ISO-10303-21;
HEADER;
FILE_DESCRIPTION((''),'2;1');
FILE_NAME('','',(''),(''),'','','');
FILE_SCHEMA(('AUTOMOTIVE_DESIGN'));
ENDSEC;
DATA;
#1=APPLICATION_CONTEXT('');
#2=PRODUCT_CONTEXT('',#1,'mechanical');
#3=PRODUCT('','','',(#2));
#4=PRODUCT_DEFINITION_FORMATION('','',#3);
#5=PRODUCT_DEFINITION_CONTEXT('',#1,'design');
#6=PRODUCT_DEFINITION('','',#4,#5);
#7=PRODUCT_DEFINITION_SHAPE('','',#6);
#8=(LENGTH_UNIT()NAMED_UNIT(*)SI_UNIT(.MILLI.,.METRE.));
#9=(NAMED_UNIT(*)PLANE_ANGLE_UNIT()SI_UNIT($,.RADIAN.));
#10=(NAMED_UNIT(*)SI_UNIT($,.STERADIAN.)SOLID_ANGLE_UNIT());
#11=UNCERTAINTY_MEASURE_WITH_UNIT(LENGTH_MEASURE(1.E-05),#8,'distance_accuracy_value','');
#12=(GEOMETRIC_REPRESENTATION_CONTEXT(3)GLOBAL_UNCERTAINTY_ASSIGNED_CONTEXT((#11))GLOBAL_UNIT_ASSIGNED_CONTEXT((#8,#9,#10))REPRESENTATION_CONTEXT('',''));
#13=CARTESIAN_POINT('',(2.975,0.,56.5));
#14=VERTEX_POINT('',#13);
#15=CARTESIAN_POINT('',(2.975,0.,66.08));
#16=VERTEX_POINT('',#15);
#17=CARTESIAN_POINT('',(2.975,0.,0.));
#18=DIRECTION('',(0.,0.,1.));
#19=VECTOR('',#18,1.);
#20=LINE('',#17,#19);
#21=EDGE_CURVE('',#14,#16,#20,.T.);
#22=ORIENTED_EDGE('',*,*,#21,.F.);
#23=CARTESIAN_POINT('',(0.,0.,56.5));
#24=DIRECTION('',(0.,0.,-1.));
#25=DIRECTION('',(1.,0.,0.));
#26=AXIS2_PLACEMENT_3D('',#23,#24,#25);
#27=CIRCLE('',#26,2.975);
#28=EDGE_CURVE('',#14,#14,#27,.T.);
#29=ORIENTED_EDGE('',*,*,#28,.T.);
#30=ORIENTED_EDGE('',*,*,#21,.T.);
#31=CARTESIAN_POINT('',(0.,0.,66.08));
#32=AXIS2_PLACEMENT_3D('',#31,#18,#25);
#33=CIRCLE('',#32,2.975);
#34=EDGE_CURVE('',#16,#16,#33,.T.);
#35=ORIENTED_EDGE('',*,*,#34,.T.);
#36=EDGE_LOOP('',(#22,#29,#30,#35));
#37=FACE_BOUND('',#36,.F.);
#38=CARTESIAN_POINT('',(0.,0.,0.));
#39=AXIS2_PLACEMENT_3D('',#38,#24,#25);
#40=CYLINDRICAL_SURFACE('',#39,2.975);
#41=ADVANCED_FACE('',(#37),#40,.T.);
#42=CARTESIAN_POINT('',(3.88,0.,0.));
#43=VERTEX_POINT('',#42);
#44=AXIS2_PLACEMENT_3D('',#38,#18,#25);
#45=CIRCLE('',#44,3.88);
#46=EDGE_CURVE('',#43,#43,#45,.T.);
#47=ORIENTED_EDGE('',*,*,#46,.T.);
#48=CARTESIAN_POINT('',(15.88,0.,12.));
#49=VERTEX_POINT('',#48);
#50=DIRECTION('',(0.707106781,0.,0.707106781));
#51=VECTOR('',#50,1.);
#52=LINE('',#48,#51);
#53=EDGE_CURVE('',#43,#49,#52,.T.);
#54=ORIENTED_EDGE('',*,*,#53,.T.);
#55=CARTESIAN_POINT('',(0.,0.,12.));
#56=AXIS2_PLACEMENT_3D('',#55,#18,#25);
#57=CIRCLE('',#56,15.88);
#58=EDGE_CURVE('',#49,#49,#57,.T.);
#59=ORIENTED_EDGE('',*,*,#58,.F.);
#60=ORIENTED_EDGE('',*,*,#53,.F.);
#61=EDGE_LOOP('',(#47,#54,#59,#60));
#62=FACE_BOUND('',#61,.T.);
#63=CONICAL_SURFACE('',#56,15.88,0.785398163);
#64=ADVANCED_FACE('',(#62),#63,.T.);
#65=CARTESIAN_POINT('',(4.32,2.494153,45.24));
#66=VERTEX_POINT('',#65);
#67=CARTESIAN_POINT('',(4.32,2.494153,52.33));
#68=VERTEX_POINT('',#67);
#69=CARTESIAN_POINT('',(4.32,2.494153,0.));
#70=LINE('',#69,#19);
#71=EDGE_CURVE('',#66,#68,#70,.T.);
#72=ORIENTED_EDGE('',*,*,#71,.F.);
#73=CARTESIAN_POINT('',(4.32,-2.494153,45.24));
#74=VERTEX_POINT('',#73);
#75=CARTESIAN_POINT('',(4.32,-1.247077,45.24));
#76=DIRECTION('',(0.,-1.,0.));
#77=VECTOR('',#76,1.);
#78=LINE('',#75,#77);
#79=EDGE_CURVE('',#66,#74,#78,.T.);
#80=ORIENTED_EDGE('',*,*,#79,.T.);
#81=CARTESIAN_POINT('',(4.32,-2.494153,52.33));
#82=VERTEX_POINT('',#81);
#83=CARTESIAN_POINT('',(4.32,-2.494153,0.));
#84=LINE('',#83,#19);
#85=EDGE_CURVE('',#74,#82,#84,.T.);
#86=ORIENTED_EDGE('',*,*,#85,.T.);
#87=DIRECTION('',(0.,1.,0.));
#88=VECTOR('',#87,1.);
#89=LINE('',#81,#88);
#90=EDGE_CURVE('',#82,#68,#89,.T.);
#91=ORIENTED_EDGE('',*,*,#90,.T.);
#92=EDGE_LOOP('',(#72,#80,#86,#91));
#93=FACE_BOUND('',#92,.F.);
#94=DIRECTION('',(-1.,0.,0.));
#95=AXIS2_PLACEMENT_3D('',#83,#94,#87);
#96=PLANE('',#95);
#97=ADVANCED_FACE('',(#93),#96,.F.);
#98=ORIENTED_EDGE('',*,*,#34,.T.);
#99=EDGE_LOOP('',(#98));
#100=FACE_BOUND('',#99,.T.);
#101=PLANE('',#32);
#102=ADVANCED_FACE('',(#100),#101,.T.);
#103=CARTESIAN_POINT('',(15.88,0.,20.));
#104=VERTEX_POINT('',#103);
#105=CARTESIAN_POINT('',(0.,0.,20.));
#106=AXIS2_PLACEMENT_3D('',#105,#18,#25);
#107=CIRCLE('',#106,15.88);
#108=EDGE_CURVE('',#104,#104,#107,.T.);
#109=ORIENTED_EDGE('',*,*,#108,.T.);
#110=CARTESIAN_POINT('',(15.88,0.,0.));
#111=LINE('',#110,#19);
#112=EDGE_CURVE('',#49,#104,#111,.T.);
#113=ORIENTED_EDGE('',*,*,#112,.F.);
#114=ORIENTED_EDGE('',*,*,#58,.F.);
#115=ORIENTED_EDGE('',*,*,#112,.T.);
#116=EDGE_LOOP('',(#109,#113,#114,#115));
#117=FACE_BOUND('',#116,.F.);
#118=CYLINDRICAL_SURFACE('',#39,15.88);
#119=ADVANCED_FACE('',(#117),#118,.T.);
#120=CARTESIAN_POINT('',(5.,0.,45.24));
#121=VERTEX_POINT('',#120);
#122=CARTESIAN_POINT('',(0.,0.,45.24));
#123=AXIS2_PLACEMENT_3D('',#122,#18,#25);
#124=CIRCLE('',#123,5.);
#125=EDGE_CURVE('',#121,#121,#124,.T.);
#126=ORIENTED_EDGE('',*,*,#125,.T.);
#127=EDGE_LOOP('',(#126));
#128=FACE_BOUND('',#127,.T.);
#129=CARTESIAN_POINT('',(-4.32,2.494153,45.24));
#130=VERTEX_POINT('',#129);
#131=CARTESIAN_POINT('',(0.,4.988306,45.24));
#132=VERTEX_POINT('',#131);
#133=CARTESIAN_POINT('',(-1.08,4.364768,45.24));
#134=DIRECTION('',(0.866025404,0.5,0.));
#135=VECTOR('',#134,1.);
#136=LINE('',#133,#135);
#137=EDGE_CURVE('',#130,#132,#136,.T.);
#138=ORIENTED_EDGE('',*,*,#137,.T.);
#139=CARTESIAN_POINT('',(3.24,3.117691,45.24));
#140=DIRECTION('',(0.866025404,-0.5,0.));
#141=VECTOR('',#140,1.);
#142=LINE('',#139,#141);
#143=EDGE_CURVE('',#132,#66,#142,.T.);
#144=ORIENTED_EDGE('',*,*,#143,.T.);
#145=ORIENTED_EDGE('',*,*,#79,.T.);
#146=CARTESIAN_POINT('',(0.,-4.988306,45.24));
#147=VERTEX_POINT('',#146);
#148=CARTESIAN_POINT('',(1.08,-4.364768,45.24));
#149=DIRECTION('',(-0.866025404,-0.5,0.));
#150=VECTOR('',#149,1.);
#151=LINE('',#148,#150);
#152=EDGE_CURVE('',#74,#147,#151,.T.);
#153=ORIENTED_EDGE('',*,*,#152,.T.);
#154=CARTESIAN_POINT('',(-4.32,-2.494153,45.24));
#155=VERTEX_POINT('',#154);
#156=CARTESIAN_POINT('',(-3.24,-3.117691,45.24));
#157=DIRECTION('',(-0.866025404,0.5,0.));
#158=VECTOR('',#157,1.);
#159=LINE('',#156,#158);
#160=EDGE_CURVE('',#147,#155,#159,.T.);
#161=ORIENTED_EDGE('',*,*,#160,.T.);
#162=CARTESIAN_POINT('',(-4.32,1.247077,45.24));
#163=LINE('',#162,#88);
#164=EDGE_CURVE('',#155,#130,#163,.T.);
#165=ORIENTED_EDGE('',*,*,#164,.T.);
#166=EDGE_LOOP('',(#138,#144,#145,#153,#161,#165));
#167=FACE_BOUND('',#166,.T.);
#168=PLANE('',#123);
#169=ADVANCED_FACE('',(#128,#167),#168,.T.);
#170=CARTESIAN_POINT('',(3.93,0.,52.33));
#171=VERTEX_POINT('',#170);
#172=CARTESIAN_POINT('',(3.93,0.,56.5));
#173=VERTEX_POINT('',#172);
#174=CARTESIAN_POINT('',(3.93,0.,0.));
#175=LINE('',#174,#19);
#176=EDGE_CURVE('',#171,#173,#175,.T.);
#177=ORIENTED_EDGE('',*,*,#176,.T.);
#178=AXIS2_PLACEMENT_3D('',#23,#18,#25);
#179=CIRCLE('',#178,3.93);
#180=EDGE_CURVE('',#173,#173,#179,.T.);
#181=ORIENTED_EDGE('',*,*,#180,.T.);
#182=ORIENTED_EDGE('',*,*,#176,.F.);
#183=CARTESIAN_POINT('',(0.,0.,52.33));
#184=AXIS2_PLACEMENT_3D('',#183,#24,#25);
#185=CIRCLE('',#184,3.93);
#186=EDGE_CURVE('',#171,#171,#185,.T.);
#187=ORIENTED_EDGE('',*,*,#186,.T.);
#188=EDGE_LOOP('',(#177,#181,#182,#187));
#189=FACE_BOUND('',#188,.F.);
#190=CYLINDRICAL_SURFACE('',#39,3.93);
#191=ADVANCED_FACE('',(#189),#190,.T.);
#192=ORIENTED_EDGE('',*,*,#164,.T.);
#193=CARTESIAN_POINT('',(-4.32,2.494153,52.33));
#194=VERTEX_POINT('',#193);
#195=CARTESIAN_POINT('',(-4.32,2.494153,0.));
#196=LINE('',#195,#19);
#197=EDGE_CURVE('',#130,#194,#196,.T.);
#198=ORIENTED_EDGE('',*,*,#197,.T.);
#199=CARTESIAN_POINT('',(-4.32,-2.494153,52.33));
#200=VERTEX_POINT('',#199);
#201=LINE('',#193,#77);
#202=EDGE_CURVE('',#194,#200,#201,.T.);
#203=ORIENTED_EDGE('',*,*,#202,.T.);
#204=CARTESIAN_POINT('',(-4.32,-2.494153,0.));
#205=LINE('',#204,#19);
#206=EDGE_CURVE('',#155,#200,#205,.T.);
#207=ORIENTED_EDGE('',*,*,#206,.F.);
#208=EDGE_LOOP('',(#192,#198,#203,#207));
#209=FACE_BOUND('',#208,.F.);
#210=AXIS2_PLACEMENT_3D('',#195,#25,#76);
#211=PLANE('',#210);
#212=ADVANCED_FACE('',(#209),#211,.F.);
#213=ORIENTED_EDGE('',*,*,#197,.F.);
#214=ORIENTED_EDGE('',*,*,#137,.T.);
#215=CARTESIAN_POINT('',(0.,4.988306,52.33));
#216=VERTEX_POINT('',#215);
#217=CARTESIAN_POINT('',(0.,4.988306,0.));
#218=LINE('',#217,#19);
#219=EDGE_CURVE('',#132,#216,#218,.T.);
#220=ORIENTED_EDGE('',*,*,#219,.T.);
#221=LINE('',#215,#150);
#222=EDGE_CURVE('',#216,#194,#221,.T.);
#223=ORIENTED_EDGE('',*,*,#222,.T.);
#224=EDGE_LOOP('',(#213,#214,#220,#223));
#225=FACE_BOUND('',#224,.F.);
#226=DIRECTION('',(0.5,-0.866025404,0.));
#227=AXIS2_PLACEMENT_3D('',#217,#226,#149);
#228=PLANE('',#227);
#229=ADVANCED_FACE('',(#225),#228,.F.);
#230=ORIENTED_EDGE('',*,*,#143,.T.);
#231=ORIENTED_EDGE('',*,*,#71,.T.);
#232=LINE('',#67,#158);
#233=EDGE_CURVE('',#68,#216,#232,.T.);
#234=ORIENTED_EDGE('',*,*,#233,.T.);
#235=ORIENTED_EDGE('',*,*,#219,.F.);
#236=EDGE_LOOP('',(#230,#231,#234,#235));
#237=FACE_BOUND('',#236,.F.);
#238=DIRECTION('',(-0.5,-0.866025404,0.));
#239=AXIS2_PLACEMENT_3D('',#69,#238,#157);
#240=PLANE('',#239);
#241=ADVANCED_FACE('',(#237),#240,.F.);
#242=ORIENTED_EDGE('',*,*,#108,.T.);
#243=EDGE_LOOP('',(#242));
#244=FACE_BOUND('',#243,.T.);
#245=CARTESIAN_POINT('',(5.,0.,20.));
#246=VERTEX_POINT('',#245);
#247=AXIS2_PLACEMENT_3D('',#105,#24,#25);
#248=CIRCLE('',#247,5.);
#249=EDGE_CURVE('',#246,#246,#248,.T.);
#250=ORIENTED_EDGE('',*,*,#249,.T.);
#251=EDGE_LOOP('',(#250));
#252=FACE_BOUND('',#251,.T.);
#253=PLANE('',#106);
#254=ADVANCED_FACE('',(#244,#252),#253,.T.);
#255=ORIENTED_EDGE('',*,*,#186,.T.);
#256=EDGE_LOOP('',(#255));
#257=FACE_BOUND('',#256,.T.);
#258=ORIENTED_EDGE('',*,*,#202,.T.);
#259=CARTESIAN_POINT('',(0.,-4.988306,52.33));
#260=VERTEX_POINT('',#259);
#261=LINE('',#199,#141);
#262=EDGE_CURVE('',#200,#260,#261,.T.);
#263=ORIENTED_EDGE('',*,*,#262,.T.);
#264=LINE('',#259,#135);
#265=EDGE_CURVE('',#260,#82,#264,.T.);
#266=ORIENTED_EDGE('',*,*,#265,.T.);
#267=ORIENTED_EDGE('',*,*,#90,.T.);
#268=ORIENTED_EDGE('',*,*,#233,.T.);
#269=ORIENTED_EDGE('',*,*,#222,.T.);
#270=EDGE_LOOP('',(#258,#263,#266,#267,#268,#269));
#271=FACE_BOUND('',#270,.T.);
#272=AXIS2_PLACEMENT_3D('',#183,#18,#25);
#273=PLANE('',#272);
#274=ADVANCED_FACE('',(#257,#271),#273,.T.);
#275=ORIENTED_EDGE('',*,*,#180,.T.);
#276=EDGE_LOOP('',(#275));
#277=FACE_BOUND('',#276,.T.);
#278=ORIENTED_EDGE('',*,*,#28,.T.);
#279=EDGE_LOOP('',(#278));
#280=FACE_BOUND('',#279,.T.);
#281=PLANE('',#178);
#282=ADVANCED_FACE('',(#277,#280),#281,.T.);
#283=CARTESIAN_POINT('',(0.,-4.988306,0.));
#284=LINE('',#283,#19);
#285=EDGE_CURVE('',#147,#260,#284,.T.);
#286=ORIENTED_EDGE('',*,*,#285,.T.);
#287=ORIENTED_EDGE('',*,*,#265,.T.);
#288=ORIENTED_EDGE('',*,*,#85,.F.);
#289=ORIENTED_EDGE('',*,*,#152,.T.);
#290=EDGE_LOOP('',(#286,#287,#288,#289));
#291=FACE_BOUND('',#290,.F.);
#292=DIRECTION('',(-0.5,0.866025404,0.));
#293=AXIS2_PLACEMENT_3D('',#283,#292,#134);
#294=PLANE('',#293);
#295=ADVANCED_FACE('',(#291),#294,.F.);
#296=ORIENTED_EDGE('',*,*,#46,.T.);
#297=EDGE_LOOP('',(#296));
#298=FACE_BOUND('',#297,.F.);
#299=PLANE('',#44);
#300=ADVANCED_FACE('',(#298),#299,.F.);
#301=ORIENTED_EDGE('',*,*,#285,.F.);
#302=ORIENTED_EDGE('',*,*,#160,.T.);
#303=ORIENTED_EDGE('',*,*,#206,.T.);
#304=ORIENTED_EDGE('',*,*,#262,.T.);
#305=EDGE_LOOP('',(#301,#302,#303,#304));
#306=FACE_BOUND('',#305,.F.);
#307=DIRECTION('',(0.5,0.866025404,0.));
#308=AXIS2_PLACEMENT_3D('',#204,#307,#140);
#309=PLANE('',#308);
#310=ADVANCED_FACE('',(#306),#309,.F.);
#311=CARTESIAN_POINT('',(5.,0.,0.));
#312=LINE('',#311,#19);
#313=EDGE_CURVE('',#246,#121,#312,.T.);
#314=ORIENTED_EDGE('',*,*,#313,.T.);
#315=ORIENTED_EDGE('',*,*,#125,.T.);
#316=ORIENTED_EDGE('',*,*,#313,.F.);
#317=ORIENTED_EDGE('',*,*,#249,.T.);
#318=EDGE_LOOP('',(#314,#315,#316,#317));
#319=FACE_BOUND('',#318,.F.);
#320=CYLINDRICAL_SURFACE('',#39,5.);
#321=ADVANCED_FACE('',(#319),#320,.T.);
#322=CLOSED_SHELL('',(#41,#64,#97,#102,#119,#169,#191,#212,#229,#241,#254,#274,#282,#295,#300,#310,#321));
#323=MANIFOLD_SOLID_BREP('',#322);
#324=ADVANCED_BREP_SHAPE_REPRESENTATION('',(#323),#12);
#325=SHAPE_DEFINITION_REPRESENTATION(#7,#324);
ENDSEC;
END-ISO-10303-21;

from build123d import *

# Parameters (mm, degrees)
F0_R     = 15.88
F0_R_2   = 10.66
F0_R_3   = 5
F0_R_4   = 3.93
F0_R_5   = 2.975
F1_DEPTH = 20
F2_DEPTH = 45.24
F3_DEPTH = 52.33
F4_DEPTH = 56.5
F5_DEPTH = 66.08
F7_SIZE  = 12


# Not quite as in the source:
# - a feature names something its author has since deleted; it is built from what else it names


with BuildPart() as f1:
    # F0 (on Top) → F1 (new body)
    with BuildSketch(Plane.XY):
        Circle(F0_R)
        Circle(F0_R_2, mode=Mode.SUBTRACT)
        Circle(F0_R_2)
        Circle(F0_R_3, mode=Mode.SUBTRACT)
        Circle(F0_R_3)
        Polygon((0, 4.9883063258), (4.32, 2.4941531629), (4.32, -2.4941531629), (0, -4.9883063258), (-4.32, -2.4941531629), (-4.32, 2.4941531629), align=None, mode=Mode.SUBTRACT)
        Polygon((4.32, -2.4941531629), (4.32, 2.4941531629), (0, 4.9883063258), (-4.32, 2.4941531629), (-4.32, -2.4941531629), (0, -4.9883063258), align=None)
        Circle(F0_R_4, mode=Mode.SUBTRACT)
        Circle(F0_R_4)
        Circle(F0_R_5, mode=Mode.SUBTRACT)
        Circle(F0_R_5)
    extrude(amount=F1_DEPTH)

    # F0 (on Top) → F2 (join)
    with BuildSketch(Plane.XY):
        Circle(F0_R_3)
        Polygon((0, 4.9883063258), (4.32, 2.4941531629), (4.32, -2.4941531629), (0, -4.9883063258), (-4.32, -2.4941531629), (-4.32, 2.4941531629), align=None, mode=Mode.SUBTRACT)
        Polygon((4.32, -2.4941531629), (4.32, 2.4941531629), (0, 4.9883063258), (-4.32, 2.4941531629), (-4.32, -2.4941531629), (0, -4.9883063258), align=None)
        Circle(F0_R_4, mode=Mode.SUBTRACT)
        Circle(F0_R_4)
        Circle(F0_R_5, mode=Mode.SUBTRACT)
        Circle(F0_R_5)
    extrude(amount=F2_DEPTH)

    # F0 (on Top) → F3 (join)
    with BuildSketch(Plane.XY):
        Polygon((4.32, -2.4941531629), (4.32, 2.4941531629), (0, 4.9883063258), (-4.32, 2.4941531629), (-4.32, -2.4941531629), (0, -4.9883063258), align=None)
        Circle(F0_R_4, mode=Mode.SUBTRACT)
        Circle(F0_R_4)
        Circle(F0_R_5, mode=Mode.SUBTRACT)
        Circle(F0_R_5)
    extrude(amount=F3_DEPTH)

    # F0 (on Top) → F4 (join)
    with BuildSketch(Plane.XY):
        Circle(F0_R_4)
        Circle(F0_R_5, mode=Mode.SUBTRACT)
        Circle(F0_R_5)
    extrude(amount=F4_DEPTH)

    # F0 (on Top) → F5 (join)
    with BuildSketch(Plane.XY):
        Circle(F0_R_5)
    extrude(amount=F5_DEPTH)

    # F7
    f7_edges = [f1.edges().sort_by_distance(p)[0] for p in [
        (-15.88, 0, 0),
    ]]
    chamfer(f7_edges, length=F7_SIZE)


solid = f1.part
